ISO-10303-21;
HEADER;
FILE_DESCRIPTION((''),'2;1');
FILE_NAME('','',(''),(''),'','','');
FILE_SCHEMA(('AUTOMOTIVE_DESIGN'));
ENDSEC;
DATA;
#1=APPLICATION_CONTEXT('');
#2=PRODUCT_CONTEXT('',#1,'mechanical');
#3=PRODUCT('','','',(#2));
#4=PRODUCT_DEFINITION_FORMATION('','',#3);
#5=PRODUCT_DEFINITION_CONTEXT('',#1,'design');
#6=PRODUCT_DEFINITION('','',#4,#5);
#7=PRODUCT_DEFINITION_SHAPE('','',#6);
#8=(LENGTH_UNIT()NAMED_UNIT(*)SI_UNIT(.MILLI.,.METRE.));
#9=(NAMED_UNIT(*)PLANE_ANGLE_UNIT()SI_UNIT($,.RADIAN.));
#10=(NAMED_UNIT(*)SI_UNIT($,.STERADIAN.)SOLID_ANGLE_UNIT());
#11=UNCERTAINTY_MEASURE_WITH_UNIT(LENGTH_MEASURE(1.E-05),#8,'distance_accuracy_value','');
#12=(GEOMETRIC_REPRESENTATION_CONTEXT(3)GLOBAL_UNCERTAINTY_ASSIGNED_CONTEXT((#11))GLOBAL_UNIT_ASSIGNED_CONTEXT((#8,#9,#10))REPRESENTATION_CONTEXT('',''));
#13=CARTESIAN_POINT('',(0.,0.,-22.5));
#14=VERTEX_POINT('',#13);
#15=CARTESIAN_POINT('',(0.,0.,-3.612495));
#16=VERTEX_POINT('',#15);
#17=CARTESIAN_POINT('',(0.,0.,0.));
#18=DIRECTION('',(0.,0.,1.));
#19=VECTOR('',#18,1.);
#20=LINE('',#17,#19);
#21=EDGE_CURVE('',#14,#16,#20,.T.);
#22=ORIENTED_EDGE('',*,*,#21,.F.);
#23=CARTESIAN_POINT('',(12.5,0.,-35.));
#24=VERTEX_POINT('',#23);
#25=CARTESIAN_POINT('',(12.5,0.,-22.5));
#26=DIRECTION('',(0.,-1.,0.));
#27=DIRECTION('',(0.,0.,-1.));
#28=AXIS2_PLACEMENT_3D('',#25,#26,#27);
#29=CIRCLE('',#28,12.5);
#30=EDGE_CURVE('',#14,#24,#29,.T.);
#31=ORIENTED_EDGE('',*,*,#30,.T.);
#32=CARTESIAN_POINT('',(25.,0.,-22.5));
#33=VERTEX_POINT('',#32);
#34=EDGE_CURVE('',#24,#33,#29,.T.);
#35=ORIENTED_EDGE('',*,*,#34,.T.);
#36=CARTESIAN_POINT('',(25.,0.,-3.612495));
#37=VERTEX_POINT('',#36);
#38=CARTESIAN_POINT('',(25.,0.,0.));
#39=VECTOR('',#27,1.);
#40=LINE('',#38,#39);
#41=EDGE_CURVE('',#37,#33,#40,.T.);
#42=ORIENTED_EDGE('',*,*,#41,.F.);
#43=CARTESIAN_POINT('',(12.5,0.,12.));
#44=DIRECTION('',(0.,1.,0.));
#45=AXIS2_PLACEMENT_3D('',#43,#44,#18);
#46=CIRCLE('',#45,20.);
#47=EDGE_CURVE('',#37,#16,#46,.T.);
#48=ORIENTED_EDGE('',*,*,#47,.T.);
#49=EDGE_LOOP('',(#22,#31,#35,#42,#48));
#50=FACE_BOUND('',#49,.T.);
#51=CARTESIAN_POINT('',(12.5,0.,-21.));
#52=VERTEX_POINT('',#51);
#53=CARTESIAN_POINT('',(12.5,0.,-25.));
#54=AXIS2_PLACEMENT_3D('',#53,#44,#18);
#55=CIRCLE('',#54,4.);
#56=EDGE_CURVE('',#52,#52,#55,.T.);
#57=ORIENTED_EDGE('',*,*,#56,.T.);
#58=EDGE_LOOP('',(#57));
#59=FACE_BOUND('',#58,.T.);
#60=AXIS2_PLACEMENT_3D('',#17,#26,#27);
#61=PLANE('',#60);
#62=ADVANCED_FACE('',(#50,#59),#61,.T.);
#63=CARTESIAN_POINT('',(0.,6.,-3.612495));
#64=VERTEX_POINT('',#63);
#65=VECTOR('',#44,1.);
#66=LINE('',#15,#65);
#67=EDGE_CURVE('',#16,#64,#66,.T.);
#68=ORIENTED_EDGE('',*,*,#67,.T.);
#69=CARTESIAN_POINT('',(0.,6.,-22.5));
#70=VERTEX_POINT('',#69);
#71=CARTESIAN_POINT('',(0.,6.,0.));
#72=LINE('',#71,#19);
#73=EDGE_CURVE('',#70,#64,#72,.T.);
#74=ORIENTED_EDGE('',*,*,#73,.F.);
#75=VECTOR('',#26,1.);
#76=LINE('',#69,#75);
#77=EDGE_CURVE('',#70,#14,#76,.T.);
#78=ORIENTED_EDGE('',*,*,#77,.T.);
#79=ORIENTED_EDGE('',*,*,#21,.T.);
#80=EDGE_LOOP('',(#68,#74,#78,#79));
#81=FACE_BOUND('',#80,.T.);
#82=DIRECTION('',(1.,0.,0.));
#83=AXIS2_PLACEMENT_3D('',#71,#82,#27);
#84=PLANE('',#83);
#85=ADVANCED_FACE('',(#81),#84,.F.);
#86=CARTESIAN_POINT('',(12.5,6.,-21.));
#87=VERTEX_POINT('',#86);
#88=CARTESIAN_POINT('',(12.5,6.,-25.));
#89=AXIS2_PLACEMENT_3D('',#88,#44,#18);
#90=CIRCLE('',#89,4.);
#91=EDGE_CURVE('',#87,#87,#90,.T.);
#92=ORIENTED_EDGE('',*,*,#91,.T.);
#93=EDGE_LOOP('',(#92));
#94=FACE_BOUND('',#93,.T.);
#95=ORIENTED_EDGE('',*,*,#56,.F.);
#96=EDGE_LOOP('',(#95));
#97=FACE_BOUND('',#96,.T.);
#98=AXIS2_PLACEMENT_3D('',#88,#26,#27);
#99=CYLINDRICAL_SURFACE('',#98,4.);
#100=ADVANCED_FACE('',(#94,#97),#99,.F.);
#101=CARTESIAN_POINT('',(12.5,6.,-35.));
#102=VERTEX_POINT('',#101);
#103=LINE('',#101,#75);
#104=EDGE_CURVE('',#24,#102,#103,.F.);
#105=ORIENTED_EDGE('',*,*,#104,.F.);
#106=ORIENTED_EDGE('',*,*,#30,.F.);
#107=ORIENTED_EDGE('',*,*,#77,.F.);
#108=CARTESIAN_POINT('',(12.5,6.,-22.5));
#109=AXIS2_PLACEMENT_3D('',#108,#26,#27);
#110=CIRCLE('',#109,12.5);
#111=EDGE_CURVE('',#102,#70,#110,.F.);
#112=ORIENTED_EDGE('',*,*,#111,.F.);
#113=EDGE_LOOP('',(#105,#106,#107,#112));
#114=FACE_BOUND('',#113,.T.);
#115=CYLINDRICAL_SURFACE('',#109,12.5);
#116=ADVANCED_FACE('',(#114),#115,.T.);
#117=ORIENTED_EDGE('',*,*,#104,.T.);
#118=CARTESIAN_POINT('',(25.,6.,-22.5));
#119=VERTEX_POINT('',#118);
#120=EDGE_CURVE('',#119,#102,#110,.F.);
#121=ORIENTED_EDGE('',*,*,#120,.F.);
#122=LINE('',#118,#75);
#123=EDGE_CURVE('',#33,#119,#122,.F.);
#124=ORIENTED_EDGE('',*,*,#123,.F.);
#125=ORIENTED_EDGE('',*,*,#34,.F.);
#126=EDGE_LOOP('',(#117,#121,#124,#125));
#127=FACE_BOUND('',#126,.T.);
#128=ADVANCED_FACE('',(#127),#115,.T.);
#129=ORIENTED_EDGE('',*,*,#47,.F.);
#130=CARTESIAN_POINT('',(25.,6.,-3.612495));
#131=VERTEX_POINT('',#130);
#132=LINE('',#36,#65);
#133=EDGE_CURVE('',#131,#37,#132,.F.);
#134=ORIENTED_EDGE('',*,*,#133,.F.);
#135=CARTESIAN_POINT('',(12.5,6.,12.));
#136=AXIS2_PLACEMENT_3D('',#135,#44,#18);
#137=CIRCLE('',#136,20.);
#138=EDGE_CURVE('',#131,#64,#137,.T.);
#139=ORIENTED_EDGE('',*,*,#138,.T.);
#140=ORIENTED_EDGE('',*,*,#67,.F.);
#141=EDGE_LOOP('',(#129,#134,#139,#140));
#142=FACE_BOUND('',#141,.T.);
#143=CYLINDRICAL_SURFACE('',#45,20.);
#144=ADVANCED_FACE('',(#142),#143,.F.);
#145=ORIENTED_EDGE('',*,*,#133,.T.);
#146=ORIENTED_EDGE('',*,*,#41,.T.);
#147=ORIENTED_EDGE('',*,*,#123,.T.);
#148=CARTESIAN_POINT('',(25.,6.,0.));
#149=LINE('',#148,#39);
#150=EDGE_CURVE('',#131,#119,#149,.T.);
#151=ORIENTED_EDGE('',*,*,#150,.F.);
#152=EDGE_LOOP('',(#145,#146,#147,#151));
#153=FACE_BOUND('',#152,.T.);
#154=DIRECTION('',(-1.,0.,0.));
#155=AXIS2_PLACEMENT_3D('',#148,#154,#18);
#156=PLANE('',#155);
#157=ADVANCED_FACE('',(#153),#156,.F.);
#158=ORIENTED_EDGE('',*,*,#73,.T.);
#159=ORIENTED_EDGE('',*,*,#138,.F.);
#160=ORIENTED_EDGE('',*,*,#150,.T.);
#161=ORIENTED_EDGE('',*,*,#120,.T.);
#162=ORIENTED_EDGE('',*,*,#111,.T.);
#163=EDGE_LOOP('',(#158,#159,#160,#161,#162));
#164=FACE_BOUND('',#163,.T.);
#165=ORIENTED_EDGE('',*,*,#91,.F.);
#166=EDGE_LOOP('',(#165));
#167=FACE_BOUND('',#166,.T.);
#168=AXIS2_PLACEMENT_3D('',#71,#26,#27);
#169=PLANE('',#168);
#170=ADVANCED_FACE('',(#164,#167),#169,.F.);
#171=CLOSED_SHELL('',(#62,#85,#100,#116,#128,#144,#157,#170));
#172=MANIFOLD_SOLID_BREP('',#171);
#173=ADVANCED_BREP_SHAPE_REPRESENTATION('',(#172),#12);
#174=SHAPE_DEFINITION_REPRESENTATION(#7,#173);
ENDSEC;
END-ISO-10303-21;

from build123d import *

# Parameters (mm, degrees)
SKETCH1_W           = 25
SKETCH1_H           = 35
SKETCH1_R           = 4
BOSS_EXTRUDE1_DEPTH = 6
FILLET1_R           = 12.5
SKETCH2_R           = 20
CUT_EXTRUDE1_DEPTH  = 6


with BuildPart() as part:
    # Sketch1 → Boss-Extrude1 (new body)
    with BuildSketch(Plane(origin=(0, 0, 0), x_dir=(1, 0, 0), z_dir=(0, 1, 0))):
        with Locations((12.5, 17.5)):
            Rectangle(SKETCH1_W, SKETCH1_H)
        with Locations(Location((12.5, 25, 0), (0, 0, 270))):
            Circle(SKETCH1_R, mode=Mode.SUBTRACT)
    extrude(amount=BOSS_EXTRUDE1_DEPTH)

    # Fillet1
    fillet1_edges = [part.edges().sort_by_distance(p)[0] for p in [
        (25, 3, -35),
        (0, 3, -35),
    ]]
    fillet(fillet1_edges, radius=FILLET1_R - 0.0001)  # a hair under: the kernel refuses the full size

    # Sketch2 → Cut-Extrude1 (cut)
    with BuildSketch(Plane(origin=(0, 6, 0), x_dir=(1, 0, 0), z_dir=(0, 1, 0))):
        with Locations((12.5, -12)):
            Circle(SKETCH2_R)
    extrude(amount=-CUT_EXTRUDE1_DEPTH, mode=Mode.SUBTRACT)


solid = part.part
